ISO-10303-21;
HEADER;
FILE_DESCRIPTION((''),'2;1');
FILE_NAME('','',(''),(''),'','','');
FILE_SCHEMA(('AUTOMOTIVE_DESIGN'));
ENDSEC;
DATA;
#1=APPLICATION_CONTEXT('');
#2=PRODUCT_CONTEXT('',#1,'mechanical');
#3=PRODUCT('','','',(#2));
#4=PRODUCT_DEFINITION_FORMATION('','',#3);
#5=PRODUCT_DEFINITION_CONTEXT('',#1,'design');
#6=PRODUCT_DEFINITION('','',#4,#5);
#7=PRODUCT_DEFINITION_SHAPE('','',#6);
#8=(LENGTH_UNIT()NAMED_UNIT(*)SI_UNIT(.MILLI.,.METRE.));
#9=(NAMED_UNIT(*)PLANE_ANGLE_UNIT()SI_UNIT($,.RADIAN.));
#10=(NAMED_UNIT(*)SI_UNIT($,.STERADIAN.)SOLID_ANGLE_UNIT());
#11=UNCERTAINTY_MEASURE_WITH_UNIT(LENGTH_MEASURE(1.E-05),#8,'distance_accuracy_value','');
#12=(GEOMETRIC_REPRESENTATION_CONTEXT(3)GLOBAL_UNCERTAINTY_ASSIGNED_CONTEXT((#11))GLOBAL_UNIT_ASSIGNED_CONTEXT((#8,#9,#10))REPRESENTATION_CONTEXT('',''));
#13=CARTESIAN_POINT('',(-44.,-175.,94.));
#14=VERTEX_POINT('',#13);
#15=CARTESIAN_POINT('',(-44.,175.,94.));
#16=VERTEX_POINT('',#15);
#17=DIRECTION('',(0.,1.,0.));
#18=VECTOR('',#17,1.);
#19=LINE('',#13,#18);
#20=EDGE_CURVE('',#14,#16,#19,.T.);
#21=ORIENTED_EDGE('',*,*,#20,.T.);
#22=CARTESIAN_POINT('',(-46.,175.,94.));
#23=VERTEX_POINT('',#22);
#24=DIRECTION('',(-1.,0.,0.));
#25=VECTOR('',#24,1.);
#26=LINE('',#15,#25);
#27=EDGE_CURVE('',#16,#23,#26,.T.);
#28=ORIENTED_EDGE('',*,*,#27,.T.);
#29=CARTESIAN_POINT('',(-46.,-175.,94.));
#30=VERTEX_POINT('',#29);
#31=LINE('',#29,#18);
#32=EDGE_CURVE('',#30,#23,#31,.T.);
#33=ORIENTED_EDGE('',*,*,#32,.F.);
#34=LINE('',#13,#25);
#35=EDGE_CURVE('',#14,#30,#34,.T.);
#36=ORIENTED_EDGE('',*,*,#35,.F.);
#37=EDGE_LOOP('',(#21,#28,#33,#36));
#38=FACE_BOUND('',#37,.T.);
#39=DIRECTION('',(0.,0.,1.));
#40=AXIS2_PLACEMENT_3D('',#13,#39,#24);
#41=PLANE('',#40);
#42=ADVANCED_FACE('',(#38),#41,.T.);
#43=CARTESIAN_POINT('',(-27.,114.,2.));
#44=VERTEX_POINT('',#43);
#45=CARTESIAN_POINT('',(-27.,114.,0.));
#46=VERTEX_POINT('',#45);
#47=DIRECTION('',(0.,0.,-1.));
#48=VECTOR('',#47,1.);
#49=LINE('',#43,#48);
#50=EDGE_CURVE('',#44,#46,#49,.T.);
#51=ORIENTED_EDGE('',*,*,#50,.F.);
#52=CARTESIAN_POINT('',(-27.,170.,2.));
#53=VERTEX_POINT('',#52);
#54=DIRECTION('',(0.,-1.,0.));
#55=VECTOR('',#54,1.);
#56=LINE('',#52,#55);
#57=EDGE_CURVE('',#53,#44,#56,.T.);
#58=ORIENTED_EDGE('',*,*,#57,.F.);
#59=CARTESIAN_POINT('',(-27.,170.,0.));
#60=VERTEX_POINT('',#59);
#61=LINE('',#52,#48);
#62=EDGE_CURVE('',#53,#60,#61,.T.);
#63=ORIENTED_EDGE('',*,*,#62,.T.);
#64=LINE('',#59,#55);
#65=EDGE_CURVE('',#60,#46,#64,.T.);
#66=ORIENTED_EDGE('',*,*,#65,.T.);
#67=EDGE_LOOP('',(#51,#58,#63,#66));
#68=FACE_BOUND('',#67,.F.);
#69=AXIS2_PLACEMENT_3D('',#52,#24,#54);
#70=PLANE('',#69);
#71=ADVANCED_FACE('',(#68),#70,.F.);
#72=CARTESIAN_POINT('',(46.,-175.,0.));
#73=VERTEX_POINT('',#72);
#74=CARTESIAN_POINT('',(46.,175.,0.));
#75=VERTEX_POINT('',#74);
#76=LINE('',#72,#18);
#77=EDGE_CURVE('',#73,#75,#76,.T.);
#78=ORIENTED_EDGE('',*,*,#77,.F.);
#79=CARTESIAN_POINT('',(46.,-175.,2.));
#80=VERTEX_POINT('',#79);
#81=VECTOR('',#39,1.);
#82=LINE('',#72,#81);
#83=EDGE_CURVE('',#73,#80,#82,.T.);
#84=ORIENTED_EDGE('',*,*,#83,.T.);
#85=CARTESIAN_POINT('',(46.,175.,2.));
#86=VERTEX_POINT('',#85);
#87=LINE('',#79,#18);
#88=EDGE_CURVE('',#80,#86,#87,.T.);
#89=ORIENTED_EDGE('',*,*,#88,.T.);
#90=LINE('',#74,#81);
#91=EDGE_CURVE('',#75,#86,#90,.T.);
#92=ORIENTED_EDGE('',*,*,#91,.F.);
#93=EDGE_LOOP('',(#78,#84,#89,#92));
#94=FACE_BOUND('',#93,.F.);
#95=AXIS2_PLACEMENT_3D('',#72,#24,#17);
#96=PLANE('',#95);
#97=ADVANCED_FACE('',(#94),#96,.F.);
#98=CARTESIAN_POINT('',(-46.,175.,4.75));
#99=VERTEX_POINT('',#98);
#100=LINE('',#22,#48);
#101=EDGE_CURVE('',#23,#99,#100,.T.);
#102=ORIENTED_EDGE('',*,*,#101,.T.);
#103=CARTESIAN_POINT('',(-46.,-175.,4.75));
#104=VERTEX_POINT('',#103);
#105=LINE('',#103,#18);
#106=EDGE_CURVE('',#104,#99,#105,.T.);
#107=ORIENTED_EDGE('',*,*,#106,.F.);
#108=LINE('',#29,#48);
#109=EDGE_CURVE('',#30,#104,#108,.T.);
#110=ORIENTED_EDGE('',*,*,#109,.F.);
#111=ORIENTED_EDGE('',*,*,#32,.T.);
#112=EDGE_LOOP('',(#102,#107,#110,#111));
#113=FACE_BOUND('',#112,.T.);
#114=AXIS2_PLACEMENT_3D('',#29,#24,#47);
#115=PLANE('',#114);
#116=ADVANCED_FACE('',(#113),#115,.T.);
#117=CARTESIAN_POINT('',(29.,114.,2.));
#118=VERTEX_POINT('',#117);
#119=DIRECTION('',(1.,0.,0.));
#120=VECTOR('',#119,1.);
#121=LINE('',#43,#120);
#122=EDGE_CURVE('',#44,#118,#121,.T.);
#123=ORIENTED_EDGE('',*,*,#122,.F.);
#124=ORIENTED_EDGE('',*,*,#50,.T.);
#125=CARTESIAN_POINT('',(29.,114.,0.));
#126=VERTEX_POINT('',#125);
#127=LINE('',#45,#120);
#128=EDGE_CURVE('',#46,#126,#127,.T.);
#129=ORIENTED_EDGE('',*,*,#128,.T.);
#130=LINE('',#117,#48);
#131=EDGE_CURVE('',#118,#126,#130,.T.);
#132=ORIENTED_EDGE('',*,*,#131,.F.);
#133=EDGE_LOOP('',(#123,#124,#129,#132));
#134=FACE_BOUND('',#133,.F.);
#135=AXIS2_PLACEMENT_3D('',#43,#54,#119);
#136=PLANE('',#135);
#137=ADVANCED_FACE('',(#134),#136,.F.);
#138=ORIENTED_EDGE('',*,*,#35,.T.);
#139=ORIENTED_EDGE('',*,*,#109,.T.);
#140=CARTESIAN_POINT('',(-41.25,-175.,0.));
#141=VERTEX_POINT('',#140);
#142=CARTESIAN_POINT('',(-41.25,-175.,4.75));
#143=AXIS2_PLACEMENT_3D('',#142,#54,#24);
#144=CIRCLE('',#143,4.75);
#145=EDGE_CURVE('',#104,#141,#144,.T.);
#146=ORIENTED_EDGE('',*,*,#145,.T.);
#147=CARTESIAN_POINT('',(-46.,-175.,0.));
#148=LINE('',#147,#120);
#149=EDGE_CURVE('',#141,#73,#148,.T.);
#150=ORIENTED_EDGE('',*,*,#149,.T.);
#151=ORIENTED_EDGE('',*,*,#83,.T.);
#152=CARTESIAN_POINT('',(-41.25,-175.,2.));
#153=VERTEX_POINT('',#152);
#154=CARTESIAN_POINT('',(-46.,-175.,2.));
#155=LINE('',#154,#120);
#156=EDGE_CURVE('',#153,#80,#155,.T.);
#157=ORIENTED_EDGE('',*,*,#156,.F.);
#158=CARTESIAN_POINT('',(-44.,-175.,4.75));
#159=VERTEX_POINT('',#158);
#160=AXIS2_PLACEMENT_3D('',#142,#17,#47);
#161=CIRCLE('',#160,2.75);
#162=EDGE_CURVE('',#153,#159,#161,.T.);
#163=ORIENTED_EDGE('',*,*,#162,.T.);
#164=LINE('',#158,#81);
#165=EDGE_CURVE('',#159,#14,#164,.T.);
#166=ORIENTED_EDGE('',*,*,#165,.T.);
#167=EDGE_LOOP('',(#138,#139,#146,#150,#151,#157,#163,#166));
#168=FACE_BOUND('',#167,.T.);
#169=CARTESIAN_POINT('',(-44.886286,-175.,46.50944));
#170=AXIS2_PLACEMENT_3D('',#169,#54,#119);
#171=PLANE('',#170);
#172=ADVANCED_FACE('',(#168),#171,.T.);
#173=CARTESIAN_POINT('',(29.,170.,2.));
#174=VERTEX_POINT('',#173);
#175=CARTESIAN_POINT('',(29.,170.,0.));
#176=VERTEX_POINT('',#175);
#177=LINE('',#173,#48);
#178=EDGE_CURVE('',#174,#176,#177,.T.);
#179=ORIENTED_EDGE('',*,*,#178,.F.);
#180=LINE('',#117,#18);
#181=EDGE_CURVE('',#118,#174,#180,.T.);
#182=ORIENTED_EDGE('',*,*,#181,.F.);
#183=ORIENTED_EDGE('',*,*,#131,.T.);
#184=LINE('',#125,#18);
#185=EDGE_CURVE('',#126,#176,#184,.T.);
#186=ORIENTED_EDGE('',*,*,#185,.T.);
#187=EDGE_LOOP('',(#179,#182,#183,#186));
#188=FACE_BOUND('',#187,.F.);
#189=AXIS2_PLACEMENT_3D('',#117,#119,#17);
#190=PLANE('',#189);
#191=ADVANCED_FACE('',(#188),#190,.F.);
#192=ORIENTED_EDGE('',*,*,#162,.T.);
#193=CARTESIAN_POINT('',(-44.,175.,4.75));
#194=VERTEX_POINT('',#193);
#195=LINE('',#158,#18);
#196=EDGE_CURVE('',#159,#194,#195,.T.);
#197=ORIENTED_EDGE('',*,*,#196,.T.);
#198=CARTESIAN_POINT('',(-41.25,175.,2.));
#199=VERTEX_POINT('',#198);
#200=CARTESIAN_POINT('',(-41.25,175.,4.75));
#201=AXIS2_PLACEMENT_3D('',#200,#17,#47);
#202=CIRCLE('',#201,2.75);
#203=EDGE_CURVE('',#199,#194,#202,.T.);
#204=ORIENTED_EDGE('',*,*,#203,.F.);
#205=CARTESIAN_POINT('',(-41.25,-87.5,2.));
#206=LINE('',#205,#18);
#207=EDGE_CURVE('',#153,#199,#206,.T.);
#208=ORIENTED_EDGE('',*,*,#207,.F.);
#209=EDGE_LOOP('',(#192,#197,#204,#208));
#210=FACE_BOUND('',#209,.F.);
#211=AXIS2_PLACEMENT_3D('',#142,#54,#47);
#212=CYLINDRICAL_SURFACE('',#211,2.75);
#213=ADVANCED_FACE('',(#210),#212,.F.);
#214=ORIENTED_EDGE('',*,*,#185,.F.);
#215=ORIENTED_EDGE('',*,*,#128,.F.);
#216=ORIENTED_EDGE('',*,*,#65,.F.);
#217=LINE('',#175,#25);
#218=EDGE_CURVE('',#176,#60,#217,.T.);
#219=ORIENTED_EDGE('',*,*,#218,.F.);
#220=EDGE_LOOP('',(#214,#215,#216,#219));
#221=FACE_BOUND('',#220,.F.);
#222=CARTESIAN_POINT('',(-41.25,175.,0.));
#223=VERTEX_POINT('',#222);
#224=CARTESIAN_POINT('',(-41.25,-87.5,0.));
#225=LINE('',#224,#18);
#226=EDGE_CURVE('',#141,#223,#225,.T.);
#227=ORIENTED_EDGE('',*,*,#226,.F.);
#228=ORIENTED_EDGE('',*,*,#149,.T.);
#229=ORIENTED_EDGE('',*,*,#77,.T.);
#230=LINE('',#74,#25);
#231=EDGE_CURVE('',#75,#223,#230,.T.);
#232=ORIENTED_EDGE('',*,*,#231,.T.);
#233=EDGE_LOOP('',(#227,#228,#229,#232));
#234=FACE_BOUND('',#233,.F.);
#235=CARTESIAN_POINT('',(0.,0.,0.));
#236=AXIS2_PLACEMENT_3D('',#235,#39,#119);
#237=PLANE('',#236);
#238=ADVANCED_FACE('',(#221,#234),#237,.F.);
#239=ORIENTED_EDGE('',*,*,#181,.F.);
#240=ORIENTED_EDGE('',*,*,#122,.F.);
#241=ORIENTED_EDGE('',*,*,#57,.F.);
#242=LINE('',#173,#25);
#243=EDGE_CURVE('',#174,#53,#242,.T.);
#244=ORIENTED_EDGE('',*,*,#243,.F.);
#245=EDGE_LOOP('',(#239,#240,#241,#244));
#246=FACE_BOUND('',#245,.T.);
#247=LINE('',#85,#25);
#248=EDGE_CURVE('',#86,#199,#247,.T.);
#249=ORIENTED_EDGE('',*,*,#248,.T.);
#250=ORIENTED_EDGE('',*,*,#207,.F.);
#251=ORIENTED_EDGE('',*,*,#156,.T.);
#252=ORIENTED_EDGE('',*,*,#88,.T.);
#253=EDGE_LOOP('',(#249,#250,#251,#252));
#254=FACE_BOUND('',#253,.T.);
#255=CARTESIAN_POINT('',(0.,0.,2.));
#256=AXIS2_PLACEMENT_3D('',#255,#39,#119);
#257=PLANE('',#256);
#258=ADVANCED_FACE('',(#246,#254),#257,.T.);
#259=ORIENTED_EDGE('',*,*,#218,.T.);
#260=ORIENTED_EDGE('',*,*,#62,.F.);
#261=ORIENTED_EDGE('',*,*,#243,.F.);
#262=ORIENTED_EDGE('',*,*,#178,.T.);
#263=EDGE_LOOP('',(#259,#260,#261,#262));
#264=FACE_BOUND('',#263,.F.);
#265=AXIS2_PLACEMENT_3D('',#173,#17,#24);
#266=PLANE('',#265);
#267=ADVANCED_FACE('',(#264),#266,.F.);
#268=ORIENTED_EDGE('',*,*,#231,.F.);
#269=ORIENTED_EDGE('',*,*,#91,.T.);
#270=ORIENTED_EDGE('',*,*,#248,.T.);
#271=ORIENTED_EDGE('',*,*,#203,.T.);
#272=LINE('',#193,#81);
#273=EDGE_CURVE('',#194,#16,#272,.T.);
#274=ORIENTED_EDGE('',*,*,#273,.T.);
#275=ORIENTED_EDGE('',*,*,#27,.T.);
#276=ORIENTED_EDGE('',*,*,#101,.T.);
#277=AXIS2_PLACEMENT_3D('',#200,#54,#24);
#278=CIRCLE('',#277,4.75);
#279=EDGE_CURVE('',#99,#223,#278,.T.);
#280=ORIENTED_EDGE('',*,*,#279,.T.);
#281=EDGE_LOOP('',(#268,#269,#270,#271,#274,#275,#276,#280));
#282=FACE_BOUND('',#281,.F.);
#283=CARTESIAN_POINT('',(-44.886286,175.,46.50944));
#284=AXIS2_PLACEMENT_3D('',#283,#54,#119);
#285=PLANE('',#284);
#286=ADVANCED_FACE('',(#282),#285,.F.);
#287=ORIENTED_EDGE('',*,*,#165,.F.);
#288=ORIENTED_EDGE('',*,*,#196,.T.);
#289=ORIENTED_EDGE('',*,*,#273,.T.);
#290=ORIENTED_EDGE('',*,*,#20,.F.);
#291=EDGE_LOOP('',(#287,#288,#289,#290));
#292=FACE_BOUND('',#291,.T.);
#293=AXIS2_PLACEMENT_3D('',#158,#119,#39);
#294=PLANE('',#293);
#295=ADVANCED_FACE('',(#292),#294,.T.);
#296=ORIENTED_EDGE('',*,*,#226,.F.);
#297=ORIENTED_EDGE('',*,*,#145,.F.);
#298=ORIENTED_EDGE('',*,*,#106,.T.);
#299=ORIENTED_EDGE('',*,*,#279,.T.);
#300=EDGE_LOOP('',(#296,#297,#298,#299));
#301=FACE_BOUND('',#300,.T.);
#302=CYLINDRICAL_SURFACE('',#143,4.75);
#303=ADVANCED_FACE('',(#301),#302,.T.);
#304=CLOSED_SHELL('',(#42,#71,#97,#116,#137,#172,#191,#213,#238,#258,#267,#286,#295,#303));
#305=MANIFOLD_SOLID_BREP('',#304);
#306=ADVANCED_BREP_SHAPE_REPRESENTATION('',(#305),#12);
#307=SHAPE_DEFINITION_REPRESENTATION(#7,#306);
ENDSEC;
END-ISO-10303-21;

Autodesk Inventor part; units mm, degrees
ref_plane "YZ Plane" through (0, 0, 0) normal (1, 0, 0) x (0, 1, 0)
ref_plane "XZ Plane" through (0, 0, 0) normal (0, 1, 0) x (-1, 0, 0)
ref_plane "XY Plane" through (0, 0, 0) normal (0, 0, 1) x (1, 0, 0)
sketch "Sketch1" plane through (0, 0, 0) normal (0, 0, 1) x (1, 0, 0)
  line L0 (-46, -175) -> (46, -175)
  line L1 (46, -175) -> (46, 175)
  line L2 (46, 175) -> (-46, 175)
  line L3 (-46, 175) -> (-46, -175)
  line L4 (-46, -175) -> (46, 175) construction
  line L5 (46, -175) -> (-46, 175) construction
  point P0 (0, 0)
  dimension "d154" = 92
  dimension "d155" = 350
extrude "Plate5" add sketch "Sketch1" along normal blind 2
sketch "Sketch7" plane through (-44, -175, 0) normal (-1, 0, 0) x (0, -1, 0)
  line L0 (-350, 0) -> (0, 0)
  line L1 (0, 0) -> (0, 94)
  line L2 (0, 94) -> (-350, 94)
  line L3 (-350, 94) -> (-350, 0)
edge flange "Flange3" height 94 angle 90 thickness 2 bend radius 2.75 thickness toward (-1, 0, 0) relief round relief width 2 relief depth 1 edges at (-46, 0, 2) wall of the first edge with corners at (-44, 175, 0) (-44, -175, 0) (-44, -175, 94) (-44, 175, 94)
bend "Bend3"
corner "Corner3"
sketch "Sketch8" plane through (0, 0, 2) normal (0, 0, 1) x (1, 0, 0)
  line L0 (46, 175) -> (46, -175) projected
  line L1 (-41.25, 175) -> (46, 175) projected
  line L2 (29, 170) -> (-27, 170)
  line L3 (-27, 170) -> (-27, 114)
  line L4 (-27, 114) -> (29, 114)
  line L5 (29, 114) -> (29, 170)
  line L6 (29, 170) -> (-27, 114) construction
  line L7 (-27, 170) -> (29, 114) construction
  point P0 (0, 0)
  point P1 (1, 142)
  point P2 (2.375, 175)
  dimension "d167" = 56
  dimension "d168" = 56
  dimension "d169" = 5
  dimension "d172" = 17
extrude "Cut1" cut sketch "Sketch8" against normal blind 2
properties part number "PNS 1758 FDS 1200x50 column" material "Stainless Steel"
